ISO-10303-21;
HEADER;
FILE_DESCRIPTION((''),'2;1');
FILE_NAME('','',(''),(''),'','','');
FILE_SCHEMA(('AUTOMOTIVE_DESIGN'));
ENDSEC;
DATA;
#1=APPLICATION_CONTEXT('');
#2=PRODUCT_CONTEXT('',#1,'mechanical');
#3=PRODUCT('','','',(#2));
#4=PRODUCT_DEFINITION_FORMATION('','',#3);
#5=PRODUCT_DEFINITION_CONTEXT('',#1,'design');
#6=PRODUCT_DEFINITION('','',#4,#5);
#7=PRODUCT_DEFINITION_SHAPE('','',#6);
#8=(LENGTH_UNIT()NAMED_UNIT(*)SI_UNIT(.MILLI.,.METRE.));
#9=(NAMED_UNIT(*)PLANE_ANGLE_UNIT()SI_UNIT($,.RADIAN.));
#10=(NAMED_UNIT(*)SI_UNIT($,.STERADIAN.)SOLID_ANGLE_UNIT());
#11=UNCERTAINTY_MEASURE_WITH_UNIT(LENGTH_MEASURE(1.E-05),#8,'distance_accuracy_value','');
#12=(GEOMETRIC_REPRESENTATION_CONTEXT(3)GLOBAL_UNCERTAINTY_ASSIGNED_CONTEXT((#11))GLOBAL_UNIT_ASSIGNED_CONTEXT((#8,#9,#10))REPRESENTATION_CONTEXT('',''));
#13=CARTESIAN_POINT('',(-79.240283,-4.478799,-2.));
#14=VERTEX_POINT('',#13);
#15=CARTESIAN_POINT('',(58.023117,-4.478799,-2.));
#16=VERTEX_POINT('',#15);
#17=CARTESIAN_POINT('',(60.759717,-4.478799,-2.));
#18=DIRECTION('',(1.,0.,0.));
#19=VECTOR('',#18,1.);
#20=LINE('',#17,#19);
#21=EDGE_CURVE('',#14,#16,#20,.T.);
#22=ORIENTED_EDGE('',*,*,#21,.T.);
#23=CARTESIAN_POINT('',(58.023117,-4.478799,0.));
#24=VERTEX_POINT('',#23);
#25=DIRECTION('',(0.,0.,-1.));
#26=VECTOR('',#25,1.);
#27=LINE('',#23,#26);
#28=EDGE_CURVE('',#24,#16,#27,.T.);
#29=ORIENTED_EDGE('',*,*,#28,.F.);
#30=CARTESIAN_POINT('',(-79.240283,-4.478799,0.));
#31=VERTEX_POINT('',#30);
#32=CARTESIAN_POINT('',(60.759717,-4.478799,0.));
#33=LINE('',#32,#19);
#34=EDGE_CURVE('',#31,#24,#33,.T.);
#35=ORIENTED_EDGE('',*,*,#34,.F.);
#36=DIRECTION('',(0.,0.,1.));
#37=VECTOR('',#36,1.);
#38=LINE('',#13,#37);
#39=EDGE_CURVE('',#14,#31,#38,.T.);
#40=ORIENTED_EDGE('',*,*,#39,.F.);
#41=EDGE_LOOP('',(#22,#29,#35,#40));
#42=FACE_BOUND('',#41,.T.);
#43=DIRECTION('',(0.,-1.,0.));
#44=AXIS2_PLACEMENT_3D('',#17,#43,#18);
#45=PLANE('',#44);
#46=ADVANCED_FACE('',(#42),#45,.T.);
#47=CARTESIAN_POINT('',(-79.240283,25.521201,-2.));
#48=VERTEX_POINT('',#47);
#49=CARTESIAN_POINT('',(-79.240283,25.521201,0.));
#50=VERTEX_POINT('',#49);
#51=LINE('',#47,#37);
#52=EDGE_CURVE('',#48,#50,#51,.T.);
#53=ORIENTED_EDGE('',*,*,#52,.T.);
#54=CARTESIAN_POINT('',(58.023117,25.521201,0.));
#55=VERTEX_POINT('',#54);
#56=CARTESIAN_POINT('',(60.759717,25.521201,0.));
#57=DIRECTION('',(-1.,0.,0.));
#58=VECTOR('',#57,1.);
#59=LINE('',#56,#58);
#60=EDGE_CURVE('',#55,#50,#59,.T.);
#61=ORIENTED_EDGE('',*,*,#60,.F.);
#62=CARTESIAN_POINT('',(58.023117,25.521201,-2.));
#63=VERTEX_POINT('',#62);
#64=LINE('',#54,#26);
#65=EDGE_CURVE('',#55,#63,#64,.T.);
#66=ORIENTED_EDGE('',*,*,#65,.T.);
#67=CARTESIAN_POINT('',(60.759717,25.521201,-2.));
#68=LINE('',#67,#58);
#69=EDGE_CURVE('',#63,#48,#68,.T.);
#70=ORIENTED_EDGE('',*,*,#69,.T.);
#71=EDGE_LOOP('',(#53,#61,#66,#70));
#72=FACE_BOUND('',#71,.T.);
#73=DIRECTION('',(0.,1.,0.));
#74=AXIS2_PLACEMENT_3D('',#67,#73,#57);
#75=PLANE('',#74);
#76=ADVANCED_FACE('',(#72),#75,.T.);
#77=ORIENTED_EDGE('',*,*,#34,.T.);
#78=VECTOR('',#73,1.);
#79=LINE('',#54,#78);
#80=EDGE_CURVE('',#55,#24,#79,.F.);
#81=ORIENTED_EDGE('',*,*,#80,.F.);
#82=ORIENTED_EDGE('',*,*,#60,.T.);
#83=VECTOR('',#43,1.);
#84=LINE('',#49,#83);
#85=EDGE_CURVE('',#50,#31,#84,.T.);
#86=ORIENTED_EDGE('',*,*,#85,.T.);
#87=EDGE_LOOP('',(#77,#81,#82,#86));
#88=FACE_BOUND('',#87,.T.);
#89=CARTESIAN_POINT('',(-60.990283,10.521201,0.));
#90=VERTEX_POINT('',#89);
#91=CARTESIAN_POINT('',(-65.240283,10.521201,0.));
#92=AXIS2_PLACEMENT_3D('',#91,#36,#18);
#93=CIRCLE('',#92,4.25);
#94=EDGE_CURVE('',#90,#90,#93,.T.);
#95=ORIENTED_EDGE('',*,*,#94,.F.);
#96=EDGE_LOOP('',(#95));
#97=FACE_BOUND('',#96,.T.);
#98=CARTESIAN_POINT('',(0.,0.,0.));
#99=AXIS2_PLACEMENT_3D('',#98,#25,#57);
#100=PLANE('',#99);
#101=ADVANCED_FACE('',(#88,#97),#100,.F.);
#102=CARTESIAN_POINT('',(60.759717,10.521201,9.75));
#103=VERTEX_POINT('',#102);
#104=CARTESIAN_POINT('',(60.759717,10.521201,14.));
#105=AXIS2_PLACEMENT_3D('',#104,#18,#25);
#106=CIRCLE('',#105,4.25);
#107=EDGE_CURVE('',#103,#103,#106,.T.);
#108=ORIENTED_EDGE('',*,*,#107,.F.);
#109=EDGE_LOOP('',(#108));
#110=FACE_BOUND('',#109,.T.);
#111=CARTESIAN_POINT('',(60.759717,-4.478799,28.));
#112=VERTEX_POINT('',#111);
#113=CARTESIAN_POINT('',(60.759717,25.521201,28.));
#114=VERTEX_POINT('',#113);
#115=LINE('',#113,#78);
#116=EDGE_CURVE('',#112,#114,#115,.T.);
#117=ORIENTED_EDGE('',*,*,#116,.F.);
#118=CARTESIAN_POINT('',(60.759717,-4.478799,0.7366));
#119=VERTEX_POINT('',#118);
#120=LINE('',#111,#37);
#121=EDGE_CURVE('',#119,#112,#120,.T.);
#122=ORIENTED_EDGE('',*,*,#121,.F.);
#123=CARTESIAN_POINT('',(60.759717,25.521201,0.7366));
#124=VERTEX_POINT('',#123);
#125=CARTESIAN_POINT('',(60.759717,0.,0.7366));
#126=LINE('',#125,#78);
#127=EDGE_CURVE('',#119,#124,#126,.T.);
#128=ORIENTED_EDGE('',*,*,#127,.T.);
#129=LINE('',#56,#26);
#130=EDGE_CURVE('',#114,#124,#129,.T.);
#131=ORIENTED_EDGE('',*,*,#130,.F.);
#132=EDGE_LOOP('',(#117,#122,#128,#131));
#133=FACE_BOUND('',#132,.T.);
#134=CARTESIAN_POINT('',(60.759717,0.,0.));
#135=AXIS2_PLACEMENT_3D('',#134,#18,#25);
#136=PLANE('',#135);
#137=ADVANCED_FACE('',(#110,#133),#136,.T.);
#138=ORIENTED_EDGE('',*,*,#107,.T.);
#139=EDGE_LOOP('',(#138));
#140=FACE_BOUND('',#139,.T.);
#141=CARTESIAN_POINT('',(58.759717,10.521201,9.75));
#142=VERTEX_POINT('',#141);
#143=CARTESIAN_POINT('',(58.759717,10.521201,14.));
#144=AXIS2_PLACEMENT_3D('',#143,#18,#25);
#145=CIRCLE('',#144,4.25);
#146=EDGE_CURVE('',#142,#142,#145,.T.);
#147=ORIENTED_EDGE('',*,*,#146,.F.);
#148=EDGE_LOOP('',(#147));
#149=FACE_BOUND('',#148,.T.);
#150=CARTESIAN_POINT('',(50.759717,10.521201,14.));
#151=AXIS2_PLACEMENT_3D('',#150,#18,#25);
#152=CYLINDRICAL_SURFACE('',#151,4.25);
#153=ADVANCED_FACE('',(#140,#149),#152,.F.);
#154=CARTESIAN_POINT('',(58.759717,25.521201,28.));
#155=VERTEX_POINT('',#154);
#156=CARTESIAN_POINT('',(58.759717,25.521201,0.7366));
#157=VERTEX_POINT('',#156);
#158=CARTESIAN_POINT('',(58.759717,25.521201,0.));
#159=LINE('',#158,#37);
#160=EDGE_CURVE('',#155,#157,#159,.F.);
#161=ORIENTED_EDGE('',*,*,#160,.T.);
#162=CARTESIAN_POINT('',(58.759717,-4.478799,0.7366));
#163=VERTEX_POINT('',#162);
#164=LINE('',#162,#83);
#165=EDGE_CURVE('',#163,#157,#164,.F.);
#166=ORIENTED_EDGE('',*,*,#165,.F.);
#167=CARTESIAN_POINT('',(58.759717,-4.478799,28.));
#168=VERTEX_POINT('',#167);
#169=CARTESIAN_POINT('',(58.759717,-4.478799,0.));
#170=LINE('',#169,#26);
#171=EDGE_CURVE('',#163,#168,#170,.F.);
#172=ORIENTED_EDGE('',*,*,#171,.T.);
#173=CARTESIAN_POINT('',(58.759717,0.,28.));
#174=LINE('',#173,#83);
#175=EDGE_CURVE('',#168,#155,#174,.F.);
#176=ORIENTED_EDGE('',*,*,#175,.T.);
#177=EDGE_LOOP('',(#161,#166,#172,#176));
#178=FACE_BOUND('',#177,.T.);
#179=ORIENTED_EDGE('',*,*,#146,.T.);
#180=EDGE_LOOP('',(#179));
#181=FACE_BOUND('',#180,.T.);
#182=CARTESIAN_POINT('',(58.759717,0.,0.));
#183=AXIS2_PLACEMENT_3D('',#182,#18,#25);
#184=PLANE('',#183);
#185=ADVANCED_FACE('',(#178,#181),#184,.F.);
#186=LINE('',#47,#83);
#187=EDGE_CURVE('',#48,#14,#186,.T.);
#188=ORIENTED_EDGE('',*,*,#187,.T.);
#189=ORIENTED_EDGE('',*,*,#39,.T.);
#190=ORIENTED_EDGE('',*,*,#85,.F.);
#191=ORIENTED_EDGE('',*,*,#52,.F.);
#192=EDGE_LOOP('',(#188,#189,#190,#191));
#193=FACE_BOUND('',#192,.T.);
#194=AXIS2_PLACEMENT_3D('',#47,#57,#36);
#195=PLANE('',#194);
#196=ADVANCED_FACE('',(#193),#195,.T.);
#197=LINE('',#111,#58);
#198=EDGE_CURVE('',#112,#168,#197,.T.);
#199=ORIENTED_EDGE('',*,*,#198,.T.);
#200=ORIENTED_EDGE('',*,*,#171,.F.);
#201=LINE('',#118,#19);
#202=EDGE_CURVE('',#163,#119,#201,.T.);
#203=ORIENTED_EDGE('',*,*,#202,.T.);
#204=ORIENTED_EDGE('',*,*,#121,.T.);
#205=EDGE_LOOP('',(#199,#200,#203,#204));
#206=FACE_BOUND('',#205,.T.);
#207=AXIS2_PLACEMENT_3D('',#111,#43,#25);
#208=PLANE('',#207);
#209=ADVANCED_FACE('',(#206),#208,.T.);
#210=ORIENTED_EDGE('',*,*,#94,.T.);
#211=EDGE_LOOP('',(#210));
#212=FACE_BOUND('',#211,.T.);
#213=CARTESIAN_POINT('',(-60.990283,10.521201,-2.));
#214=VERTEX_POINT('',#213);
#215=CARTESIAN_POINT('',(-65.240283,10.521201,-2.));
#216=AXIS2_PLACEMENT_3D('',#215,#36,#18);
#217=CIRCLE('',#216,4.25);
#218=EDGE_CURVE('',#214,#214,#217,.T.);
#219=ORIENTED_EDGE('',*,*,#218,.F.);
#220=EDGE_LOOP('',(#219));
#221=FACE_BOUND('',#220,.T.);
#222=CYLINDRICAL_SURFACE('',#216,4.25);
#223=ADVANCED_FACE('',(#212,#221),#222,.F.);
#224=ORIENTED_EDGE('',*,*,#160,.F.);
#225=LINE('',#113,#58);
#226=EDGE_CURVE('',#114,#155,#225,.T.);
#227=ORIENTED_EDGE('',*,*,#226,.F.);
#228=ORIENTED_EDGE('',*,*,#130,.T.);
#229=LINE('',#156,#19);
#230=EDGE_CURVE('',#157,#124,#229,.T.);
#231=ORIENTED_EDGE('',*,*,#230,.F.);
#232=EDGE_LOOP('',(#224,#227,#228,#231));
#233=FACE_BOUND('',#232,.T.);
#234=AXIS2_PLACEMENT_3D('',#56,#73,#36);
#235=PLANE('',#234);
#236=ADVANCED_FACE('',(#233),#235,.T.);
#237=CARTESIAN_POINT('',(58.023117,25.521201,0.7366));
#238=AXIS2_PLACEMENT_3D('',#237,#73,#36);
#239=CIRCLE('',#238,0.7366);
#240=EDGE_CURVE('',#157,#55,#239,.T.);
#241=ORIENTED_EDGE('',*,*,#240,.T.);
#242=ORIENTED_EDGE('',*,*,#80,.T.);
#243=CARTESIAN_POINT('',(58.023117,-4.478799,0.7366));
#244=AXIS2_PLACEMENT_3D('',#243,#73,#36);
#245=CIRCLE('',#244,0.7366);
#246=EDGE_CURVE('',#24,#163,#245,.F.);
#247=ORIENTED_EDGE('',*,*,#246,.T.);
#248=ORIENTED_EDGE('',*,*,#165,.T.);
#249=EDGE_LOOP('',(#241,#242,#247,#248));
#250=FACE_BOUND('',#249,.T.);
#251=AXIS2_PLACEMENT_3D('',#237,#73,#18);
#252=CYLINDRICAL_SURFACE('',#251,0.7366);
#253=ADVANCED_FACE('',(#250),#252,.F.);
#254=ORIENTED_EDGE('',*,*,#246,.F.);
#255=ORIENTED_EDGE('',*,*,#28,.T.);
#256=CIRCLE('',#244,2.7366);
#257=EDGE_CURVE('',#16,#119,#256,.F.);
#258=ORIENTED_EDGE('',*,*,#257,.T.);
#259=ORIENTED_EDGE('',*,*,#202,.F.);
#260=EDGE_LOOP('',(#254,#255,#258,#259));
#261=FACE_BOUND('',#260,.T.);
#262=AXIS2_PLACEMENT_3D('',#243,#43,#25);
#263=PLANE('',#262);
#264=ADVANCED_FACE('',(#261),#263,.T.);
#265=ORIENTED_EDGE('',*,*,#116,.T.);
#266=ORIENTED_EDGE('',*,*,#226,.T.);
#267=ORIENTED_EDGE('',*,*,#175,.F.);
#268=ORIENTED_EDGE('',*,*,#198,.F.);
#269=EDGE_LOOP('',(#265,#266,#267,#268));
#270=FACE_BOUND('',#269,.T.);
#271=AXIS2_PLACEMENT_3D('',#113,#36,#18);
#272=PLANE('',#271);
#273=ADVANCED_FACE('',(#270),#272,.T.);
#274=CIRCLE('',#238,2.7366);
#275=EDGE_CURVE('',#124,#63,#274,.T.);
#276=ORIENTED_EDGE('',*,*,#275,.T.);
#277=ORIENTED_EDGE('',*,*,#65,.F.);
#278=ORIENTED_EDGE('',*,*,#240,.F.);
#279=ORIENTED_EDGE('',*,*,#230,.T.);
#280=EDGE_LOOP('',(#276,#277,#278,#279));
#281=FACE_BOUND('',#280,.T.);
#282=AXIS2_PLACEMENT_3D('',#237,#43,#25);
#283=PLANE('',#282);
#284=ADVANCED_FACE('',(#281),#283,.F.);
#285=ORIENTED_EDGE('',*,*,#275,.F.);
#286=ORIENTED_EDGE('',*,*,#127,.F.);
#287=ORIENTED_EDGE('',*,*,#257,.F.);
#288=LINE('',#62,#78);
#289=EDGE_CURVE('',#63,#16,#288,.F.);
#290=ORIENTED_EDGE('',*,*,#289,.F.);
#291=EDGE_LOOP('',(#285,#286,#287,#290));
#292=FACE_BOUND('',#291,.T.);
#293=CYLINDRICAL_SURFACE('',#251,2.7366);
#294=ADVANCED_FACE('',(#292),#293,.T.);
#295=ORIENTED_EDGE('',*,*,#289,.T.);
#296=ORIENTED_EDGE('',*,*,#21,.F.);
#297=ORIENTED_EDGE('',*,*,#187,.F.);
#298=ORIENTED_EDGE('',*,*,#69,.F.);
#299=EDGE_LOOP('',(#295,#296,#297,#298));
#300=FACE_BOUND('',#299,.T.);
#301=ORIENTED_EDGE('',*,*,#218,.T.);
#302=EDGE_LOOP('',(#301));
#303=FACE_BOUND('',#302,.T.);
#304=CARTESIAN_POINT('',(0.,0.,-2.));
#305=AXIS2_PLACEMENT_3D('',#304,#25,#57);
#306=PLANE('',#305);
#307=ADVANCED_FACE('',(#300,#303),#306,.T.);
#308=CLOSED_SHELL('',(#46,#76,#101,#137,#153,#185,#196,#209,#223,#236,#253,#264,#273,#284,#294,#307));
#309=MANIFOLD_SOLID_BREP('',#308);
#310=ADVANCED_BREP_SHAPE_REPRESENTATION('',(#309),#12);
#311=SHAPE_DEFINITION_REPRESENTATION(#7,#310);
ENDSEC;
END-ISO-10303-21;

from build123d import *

# Parameters (mm, degrees)
SKETCH1_W                    = 140
SKETCH1_H                    = 30
SKETCH1_R                    = 4.25
BASE_FLANGE1_DEPTH           = 2
EDGE_FLANGE1_STRIP_W         = 9.4732
EDGE_FLANGE1_STRIP_H         = 2
EDGE_FLANGE1_STRIP_CUT_DEPTH = 30
EDGE_FLANGE1_DEPTH           = 30
SKETCH9_R                    = 4.25
CUT_EXTRUDE1_DEPTH           = 10


# Sheet-metal steps are written as plain solids
with BuildPart() as part:
    # Sketch1 → Base-Flange1 (new body)
    with BuildSketch(Plane.XY):
        with Locations((-9.240282686, 10.521201413)):
            Rectangle(SKETCH1_W, SKETCH1_H)
        with Locations((-65.240282686, 10.521201413)):
            Circle(SKETCH1_R, mode=Mode.SUBTRACT)
    extrude(amount=-BASE_FLANGE1_DEPTH)

    # Edge-Flange1 strip (across the edge) → Edge-Flange1 strip cut (cut)
    with BuildSketch(Plane(origin=(60.759717314, -4.478798587, 0), x_dir=(-1, 0, 0), z_dir=(0, 1, 0))):
        with Locations((-2, -1)):
            Rectangle(EDGE_FLANGE1_STRIP_W, EDGE_FLANGE1_STRIP_H)
    extrude(amount=EDGE_FLANGE1_STRIP_CUT_DEPTH, mode=Mode.SUBTRACT)

    # Edge-Flange1 section (across the edge) → Edge-Flange1 (add)
    with BuildSketch(Plane(origin=(60.759717314, -4.478798587, 0), x_dir=(-1, 0, 0), z_dir=(0, 1, 0))):
        with BuildLine():
            Line((0, 0.7366), (0, 28))
            Line((0, 28), (2, 28))
            Line((2, 28), (2, 0.7366))
            ThreePointArc((2, 0.7366), (2.215745145, 0.215745145), (2.7366, 0))
            Line((2.7366, 0), (2.7366, -2))
            ThreePointArc((2.7366, -2), (0.801531583, -1.198468417), (0, 0.7366))
        make_face()
    extrude(amount=EDGE_FLANGE1_DEPTH)

    # Sketch9 → Cut-Extrude1 (cut)
    with BuildSketch(Plane(origin=(60.759717314, 0, 0), x_dir=(0, 0, -1), z_dir=(1, 0, 0))):
        with Locations((-14, 10.521201413)):
            Circle(SKETCH9_R)
    extrude(amount=-CUT_EXTRUDE1_DEPTH, mode=Mode.SUBTRACT)


solid = part.part
